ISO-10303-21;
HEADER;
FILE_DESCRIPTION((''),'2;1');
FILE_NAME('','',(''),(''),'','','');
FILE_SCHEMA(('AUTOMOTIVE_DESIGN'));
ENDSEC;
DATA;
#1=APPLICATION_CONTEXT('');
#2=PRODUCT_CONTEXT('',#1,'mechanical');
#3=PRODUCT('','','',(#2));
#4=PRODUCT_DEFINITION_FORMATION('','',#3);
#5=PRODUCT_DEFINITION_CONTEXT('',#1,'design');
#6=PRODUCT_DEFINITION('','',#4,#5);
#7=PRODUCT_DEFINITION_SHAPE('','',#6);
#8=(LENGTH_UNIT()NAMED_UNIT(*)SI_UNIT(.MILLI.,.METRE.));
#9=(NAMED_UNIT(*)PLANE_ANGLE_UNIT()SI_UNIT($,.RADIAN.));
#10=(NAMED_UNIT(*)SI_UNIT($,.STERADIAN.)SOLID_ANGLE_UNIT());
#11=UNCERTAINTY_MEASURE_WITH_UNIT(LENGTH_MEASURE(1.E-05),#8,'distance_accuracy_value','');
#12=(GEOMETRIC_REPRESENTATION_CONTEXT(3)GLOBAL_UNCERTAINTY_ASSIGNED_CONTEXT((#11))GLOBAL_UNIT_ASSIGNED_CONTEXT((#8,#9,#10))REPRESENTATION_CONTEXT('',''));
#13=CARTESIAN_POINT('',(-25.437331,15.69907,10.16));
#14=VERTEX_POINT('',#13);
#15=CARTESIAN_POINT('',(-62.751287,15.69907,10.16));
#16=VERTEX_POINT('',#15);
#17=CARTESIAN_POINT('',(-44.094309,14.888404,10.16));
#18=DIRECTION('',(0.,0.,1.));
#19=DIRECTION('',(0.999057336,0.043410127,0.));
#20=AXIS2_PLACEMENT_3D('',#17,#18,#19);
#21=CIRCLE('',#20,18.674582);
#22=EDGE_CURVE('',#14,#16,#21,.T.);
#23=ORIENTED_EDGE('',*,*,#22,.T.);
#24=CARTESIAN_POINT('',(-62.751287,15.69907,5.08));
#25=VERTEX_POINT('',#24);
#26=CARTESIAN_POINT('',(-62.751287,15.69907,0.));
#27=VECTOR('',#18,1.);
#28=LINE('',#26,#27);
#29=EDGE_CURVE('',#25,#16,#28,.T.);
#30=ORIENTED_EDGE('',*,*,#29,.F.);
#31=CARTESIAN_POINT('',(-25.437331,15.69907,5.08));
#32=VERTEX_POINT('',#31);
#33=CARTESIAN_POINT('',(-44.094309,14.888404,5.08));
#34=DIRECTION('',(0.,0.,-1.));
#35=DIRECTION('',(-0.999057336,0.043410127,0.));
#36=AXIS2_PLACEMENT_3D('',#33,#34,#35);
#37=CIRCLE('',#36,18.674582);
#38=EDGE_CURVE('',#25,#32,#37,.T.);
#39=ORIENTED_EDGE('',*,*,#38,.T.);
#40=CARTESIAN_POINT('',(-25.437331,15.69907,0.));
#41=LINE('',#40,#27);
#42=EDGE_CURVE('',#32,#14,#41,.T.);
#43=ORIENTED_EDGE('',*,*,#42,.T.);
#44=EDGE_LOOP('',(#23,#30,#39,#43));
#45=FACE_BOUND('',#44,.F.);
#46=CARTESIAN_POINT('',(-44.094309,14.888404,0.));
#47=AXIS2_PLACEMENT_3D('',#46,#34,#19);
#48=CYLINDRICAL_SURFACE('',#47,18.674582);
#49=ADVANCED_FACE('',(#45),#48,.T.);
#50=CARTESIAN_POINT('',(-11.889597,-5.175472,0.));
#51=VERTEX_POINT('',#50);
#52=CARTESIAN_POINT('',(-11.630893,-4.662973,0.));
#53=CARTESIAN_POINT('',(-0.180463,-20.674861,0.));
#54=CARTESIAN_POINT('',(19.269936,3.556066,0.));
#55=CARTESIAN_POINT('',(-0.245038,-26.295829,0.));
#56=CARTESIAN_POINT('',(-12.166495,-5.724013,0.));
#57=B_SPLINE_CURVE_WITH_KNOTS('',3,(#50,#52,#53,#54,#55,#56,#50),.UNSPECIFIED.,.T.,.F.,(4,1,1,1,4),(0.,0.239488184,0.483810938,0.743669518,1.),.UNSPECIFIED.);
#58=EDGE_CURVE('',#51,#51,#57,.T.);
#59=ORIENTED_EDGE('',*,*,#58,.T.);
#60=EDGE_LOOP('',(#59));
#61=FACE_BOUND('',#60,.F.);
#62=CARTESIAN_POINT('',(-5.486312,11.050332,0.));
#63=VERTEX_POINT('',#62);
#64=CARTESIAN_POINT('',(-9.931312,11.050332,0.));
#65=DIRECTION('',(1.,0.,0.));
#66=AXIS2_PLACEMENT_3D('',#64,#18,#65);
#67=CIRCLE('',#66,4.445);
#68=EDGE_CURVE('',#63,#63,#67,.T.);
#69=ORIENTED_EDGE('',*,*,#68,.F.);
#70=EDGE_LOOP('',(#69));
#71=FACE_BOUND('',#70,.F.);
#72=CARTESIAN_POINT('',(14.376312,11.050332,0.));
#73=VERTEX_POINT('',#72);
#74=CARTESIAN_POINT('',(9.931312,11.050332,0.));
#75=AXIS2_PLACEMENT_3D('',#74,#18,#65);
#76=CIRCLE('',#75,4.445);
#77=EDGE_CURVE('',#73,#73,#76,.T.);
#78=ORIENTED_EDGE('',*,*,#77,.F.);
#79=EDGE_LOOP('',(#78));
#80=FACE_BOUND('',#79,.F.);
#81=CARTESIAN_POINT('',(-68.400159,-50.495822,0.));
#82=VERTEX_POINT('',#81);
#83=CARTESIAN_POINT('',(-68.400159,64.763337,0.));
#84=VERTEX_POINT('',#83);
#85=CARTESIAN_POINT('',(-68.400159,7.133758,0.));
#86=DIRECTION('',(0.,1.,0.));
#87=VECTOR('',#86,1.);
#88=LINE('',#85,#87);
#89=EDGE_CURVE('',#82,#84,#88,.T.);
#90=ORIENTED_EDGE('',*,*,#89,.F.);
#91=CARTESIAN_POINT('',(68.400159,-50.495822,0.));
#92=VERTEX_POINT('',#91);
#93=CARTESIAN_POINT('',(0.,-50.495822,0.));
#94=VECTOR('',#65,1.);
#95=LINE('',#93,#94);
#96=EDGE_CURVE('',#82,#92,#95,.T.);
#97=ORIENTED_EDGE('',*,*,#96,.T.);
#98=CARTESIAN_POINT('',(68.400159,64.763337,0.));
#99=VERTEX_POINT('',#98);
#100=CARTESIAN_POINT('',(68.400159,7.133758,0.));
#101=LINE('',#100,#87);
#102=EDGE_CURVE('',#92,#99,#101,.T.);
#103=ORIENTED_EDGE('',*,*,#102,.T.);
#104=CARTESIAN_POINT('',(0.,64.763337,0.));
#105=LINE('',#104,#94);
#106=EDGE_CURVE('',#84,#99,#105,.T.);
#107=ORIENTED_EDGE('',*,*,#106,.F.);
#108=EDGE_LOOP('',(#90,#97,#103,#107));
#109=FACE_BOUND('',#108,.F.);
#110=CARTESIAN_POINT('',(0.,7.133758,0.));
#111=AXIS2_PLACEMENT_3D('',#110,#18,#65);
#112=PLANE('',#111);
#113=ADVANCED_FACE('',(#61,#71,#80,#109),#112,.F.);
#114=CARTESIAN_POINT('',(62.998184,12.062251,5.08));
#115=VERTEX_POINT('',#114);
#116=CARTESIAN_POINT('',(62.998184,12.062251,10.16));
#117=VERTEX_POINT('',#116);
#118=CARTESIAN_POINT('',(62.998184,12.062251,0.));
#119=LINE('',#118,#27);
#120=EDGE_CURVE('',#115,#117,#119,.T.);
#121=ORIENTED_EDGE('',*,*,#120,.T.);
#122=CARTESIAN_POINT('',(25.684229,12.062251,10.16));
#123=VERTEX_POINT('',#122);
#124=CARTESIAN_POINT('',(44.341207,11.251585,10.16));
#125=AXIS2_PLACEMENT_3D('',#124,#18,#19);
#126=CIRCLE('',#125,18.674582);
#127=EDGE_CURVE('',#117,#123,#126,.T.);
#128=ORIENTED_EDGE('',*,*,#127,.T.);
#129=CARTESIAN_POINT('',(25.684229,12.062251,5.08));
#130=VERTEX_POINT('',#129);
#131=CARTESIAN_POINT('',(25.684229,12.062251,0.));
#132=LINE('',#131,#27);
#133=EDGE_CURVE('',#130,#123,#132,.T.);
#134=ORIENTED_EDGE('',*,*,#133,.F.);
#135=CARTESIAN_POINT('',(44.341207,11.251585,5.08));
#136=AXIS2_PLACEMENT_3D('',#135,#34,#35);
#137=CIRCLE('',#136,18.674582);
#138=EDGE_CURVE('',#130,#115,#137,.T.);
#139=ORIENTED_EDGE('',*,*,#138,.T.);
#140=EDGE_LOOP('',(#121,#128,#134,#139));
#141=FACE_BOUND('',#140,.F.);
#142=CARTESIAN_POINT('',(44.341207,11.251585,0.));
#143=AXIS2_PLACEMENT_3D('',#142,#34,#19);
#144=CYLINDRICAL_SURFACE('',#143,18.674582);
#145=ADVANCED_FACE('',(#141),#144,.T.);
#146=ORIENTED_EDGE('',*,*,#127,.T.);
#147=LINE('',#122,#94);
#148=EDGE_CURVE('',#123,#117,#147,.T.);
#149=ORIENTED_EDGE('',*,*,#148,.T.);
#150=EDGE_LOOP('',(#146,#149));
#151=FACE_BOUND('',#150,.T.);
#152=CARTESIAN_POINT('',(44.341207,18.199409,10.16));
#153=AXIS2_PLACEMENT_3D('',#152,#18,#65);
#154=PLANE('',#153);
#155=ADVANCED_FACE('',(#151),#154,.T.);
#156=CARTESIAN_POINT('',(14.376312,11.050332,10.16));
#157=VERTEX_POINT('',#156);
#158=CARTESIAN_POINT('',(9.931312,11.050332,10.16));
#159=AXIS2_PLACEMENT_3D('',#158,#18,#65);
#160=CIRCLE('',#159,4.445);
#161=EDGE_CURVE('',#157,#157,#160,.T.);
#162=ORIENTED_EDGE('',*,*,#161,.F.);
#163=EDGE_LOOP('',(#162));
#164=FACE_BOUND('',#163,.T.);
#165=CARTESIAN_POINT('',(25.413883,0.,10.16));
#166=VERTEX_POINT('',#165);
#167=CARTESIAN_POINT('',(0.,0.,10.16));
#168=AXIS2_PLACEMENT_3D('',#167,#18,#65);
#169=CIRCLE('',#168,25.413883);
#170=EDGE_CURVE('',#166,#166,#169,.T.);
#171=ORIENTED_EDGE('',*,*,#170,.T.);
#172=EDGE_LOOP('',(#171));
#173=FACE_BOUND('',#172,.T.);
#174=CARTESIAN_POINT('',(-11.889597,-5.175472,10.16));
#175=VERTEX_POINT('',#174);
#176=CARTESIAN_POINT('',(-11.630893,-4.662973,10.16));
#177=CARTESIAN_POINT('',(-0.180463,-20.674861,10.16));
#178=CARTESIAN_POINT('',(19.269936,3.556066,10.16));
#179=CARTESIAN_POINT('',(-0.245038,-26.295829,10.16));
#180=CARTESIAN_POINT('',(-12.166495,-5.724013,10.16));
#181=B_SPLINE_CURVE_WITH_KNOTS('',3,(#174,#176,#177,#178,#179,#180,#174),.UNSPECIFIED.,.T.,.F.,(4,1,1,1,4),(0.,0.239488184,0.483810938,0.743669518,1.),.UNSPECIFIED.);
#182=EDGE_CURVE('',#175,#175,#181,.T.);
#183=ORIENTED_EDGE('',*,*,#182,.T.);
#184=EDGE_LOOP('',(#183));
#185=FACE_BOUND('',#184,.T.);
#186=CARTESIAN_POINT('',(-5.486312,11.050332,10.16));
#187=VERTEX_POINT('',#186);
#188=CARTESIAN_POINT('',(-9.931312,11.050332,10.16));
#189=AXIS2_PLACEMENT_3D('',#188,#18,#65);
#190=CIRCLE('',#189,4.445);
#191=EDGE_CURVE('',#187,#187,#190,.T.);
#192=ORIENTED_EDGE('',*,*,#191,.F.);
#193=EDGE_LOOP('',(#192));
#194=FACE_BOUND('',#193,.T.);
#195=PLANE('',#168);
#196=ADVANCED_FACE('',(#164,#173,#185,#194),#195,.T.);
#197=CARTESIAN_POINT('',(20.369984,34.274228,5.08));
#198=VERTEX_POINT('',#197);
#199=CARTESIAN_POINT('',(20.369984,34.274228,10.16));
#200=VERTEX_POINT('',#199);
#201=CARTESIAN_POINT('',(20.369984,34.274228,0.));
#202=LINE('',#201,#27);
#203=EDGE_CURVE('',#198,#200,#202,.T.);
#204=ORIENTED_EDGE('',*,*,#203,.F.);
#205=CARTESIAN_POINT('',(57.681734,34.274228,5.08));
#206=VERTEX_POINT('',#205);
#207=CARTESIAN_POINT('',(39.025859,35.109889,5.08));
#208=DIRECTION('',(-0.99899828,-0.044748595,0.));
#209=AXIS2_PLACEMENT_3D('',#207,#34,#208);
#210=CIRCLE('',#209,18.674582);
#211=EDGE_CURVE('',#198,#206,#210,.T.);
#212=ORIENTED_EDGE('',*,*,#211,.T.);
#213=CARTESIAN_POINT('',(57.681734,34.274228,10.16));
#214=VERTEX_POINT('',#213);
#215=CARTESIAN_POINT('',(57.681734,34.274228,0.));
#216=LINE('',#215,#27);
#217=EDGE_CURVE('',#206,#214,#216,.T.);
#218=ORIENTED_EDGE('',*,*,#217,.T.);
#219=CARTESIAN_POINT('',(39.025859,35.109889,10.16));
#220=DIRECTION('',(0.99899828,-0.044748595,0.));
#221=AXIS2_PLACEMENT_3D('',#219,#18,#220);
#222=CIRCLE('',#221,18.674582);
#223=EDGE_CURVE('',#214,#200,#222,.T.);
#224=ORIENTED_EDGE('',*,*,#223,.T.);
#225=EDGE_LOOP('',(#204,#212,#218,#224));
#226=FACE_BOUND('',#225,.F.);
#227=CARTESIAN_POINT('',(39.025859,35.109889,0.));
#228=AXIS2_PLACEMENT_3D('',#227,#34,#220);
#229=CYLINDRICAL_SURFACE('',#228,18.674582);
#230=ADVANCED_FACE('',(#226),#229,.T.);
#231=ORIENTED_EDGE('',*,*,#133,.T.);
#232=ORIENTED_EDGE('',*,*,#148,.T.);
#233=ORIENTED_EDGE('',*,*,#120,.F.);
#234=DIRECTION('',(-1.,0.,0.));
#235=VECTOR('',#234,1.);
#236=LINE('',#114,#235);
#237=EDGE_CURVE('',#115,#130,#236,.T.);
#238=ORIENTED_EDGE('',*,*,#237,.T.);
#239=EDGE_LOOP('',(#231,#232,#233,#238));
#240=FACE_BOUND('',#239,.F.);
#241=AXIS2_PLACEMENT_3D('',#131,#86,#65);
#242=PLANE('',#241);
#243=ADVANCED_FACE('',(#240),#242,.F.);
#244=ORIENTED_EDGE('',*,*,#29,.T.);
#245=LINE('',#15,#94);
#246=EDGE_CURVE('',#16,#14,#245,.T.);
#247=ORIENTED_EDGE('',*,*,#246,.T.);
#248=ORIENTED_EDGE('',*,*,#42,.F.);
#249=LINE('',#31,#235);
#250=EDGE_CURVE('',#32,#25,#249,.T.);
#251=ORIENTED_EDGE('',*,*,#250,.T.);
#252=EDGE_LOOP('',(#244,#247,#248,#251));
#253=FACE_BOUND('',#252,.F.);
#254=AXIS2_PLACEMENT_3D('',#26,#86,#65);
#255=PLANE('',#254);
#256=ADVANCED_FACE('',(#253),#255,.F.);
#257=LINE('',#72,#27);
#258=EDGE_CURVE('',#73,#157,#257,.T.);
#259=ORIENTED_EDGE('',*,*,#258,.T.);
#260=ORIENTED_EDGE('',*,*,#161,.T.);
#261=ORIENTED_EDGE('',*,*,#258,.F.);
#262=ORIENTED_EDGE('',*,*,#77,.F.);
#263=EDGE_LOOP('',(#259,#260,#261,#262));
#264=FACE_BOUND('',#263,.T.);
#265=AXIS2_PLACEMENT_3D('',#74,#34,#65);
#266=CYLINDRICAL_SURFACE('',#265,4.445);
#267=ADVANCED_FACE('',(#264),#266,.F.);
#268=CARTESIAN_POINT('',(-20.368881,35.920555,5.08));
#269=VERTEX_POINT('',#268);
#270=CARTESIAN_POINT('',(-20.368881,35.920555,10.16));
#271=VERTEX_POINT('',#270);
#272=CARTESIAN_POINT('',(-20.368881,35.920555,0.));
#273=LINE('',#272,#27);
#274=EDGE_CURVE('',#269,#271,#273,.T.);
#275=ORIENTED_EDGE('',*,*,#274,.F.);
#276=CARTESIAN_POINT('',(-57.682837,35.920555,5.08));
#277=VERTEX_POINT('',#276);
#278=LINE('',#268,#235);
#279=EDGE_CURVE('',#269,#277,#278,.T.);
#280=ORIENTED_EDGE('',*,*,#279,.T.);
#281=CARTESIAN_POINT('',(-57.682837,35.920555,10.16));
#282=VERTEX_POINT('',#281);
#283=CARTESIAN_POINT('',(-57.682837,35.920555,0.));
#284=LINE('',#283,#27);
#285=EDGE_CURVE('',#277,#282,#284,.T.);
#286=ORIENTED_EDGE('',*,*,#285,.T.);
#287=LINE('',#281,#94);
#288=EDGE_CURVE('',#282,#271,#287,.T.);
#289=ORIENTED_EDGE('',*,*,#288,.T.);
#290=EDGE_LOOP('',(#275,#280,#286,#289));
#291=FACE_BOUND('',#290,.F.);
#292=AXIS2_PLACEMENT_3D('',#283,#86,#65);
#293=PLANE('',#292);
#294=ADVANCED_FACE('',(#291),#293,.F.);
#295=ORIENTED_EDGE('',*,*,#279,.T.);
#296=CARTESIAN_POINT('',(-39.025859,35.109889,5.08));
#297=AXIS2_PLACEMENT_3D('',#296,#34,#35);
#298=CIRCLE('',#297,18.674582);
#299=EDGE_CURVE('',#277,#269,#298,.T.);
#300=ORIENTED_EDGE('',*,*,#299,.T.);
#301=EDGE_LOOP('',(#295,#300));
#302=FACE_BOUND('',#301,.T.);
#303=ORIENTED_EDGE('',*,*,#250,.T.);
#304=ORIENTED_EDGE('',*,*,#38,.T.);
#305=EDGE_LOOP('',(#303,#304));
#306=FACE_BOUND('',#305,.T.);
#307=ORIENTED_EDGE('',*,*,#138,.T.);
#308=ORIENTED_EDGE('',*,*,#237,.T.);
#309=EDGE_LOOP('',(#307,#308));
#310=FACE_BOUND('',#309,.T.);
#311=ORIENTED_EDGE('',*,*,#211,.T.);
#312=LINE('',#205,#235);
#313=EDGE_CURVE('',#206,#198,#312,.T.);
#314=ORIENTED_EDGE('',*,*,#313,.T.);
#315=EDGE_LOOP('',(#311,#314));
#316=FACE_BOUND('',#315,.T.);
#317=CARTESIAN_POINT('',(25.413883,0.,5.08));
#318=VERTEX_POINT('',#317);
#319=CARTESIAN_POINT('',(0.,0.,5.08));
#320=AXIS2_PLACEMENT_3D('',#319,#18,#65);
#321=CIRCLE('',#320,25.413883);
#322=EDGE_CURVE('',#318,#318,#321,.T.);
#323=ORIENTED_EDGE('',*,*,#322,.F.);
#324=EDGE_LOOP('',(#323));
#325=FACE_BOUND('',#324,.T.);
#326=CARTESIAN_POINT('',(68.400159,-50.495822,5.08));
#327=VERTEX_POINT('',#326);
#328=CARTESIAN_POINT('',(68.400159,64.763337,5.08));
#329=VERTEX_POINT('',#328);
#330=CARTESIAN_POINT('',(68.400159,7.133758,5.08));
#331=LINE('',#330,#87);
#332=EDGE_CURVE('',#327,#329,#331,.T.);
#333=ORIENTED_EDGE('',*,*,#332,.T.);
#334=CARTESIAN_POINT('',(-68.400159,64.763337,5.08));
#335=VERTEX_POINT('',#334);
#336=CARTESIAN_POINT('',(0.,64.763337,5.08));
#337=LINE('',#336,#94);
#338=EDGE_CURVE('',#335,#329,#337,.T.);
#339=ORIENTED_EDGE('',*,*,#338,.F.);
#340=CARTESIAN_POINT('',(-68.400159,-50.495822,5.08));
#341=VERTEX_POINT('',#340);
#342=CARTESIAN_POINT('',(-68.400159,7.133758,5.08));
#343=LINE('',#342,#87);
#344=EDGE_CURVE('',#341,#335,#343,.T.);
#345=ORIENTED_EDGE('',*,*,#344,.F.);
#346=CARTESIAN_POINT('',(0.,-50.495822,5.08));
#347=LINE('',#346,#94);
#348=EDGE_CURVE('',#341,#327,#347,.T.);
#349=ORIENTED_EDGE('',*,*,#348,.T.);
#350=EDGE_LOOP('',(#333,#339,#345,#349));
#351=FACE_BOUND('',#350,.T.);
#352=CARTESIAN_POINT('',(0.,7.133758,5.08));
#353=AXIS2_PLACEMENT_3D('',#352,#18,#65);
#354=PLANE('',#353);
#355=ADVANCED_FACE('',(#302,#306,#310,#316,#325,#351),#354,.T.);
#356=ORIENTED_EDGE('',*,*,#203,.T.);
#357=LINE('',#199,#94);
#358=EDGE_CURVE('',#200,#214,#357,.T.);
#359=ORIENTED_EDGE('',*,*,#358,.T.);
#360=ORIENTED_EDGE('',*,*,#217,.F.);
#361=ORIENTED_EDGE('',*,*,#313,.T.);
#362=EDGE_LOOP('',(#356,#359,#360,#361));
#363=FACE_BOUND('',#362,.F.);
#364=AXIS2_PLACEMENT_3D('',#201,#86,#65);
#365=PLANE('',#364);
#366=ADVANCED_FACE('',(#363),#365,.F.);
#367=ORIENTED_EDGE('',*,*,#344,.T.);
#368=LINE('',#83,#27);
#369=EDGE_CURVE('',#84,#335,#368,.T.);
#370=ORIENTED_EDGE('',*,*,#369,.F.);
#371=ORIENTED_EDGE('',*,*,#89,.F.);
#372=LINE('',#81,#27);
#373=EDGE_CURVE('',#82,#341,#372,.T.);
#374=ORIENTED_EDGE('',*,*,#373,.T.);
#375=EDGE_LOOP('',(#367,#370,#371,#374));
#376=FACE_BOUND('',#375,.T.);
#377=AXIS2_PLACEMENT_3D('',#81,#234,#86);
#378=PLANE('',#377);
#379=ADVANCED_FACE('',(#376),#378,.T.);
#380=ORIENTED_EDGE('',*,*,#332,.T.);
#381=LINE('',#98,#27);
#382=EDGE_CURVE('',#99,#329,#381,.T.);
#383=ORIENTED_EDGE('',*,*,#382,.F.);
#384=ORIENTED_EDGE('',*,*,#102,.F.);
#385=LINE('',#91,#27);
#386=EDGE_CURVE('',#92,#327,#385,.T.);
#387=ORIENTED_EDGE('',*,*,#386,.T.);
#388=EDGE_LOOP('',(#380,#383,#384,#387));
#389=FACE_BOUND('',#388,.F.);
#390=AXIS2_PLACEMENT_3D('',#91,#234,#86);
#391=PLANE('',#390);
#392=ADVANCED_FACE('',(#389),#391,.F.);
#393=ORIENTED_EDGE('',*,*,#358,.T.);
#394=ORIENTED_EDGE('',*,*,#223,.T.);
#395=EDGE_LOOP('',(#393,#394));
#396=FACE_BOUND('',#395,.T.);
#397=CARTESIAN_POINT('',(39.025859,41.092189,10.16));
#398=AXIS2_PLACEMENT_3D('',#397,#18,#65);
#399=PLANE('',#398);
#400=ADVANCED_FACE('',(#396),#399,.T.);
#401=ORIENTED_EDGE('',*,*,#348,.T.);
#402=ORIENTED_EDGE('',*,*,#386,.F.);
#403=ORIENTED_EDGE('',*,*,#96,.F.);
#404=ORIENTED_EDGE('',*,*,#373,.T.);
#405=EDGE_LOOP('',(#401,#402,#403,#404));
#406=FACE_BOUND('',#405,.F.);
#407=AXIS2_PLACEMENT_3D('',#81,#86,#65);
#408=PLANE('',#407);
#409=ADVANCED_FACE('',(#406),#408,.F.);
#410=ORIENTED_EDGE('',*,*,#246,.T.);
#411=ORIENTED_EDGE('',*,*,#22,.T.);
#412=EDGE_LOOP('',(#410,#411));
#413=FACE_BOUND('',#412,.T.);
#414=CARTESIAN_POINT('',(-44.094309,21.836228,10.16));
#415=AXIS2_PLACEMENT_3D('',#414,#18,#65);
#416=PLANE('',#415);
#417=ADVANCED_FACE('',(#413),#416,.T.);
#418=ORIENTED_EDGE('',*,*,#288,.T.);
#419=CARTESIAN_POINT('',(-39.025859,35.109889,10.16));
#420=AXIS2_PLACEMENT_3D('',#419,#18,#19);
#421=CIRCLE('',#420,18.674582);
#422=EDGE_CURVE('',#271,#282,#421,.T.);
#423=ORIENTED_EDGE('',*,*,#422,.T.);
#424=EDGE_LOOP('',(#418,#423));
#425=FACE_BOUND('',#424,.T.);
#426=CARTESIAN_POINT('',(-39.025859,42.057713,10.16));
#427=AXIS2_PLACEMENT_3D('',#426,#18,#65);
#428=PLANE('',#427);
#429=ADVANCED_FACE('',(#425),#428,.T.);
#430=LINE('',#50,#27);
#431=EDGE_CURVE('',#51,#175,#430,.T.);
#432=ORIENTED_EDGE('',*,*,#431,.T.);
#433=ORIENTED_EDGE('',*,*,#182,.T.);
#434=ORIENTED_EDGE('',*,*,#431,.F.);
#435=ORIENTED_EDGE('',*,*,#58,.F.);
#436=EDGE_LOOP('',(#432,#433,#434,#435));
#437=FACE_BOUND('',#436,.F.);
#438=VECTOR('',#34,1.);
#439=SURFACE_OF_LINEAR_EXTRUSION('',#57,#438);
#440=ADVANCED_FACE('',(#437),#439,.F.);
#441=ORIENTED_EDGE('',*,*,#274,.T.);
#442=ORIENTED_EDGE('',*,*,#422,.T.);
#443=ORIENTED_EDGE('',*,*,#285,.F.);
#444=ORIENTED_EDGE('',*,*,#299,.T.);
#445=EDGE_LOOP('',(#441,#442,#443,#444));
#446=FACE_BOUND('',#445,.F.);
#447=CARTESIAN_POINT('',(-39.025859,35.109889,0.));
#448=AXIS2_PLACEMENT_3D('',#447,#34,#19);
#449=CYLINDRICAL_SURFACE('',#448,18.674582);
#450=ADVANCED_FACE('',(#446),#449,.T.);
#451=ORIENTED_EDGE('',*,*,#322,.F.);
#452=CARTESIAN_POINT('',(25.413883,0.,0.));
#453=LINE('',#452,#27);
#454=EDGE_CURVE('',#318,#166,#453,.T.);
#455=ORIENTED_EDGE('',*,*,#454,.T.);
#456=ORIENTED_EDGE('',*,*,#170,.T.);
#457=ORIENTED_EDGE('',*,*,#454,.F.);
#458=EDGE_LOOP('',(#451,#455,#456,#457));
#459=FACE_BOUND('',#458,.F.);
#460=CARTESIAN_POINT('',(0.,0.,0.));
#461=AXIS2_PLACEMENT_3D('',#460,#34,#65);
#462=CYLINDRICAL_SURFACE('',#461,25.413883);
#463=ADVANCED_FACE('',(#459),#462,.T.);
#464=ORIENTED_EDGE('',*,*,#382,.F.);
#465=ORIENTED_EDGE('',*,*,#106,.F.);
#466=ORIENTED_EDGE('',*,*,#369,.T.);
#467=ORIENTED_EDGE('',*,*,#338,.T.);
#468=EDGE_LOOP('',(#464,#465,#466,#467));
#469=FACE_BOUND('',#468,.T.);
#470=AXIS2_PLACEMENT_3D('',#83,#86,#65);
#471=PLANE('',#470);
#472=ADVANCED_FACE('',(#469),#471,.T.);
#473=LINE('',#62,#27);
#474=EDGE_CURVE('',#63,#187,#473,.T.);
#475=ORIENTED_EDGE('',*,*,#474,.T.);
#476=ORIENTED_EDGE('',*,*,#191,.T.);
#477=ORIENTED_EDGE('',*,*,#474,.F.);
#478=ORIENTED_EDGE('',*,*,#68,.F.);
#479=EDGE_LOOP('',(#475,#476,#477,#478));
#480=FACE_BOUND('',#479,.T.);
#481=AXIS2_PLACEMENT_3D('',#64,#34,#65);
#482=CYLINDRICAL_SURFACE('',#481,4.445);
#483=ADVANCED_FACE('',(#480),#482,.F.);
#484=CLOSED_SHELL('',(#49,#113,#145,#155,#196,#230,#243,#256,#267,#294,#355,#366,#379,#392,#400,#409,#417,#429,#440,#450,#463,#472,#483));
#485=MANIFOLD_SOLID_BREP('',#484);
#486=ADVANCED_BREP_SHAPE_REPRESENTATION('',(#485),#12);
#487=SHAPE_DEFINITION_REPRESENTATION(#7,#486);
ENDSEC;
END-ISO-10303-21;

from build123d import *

# Parameters (mm, degrees)
F0_W     = 136.8003189564
F0_H     = 115.2591593564
F0_R     = 25.413882958
F1_DEPTH = 5.08
F2_DEPTH = 10.16
F0_R_2   = 4.445
F3_DEPTH = 10.16


# Not quite as in the source:
# - the program builds the solid bodies; features that only make, move or delete a surface that nothing else refers to are left out


with BuildPart() as f1:
    # F0 (on Top) → F1 (new body)
    with BuildSketch(Plane.XY):
        with Locations((0, 7.1337576956)):
            Rectangle(F0_W, F0_H)
        Circle(F0_R, mode=Mode.SUBTRACT)
        with BuildLine():
            Line((-25.4373313075, 15.699069947), (-62.7512871141, 15.699069947))
            ThreePointArc((-62.7512871141, 15.699069947), (-44.0943092108, 33.5629857305), (-25.4373313075, 15.699069947))
        make_face(mode=Mode.SUBTRACT)
        with BuildLine():
            Line((-20.3688811746, 35.9205551982), (-57.6828369811, 35.9205551982))
            ThreePointArc((-57.6828369811, 35.9205551982), (-39.0258590779, 53.7844709817), (-20.3688811746, 35.9205551982))
        make_face(mode=Mode.SUBTRACT)
        with BuildLine():
            Line((62.9981844539, 12.06225143), (25.6842286473, 12.06225143))
            ThreePointArc((25.6842286473, 12.06225143), (44.3412065506, 29.9261672135), (62.9981844539, 12.06225143))
        make_face(mode=Mode.SUBTRACT)
        with BuildLine():
            ThreePointArc((20.3699840242, 34.2742279379), (39.0258590779, 53.7844709817), (57.6817341315, 34.2742279379))
            Line((57.6817341315, 34.2742279379), (20.3699840242, 34.2742279379))
        make_face(mode=Mode.SUBTRACT)
    extrude(amount=F1_DEPTH)

    # F0 (on Top) → F2 (join)
    with BuildSketch(Plane.XY):
        with BuildLine():
            ThreePointArc((-20.3688811746, 35.9205551982), (-39.0258590779, 53.7844709817), (-57.6828369811, 35.9205551982))
            Line((-57.6828369811, 35.9205551982), (-20.3688811746, 35.9205551982))
        make_face()
        with BuildLine():
            ThreePointArc((-25.4373313075, 15.699069947), (-44.0943092108, 33.5629857305), (-62.7512871141, 15.699069947))
            Line((-62.7512871141, 15.699069947), (-25.4373313075, 15.699069947))
        make_face()
        with BuildLine():
            Line((20.3699840242, 34.2742279379), (57.6817341315, 34.2742279379))
            ThreePointArc((57.6817341315, 34.2742279379), (39.0258590779, 53.7844709817), (20.3699840242, 34.2742279379))
        make_face()
        with BuildLine():
            ThreePointArc((62.9981844539, 12.06225143), (44.3412065506, 29.9261672135), (25.6842286473, 12.06225143))
            Line((25.6842286473, 12.06225143), (62.9981844539, 12.06225143))
        make_face()
    extrude(amount=F2_DEPTH)

    # F0 (on Top) → F3 (join)
    with BuildSketch(Plane.XY):
        Circle(F0_R)
        with BuildLine():
            add(Edge.make_bspline(
                [(-11.889597401, -5.1754722372), (-11.6308932935, -4.6629733601), (-0.1804625636, -20.6748608417), (19.2699362073, 3.5560661133), (-0.2450377996, -26.2958289114), (-12.1664951894, -5.7240132208), (-11.889597401, -5.1754722372)],
                knots=[0, 0, 0, 0, 0.2394881843, 0.4838109378, 0.743669518, 1, 1, 1, 1], degree=3))
        make_face(mode=Mode.SUBTRACT)
        with Locations((-9.9313119426, 11.0503323376)):
            Circle(F0_R_2, mode=Mode.SUBTRACT)
        with Locations((9.9313119426, 11.0503323376)):
            Circle(F0_R_2, mode=Mode.SUBTRACT)
    extrude(amount=F3_DEPTH)


solid = f1.part
